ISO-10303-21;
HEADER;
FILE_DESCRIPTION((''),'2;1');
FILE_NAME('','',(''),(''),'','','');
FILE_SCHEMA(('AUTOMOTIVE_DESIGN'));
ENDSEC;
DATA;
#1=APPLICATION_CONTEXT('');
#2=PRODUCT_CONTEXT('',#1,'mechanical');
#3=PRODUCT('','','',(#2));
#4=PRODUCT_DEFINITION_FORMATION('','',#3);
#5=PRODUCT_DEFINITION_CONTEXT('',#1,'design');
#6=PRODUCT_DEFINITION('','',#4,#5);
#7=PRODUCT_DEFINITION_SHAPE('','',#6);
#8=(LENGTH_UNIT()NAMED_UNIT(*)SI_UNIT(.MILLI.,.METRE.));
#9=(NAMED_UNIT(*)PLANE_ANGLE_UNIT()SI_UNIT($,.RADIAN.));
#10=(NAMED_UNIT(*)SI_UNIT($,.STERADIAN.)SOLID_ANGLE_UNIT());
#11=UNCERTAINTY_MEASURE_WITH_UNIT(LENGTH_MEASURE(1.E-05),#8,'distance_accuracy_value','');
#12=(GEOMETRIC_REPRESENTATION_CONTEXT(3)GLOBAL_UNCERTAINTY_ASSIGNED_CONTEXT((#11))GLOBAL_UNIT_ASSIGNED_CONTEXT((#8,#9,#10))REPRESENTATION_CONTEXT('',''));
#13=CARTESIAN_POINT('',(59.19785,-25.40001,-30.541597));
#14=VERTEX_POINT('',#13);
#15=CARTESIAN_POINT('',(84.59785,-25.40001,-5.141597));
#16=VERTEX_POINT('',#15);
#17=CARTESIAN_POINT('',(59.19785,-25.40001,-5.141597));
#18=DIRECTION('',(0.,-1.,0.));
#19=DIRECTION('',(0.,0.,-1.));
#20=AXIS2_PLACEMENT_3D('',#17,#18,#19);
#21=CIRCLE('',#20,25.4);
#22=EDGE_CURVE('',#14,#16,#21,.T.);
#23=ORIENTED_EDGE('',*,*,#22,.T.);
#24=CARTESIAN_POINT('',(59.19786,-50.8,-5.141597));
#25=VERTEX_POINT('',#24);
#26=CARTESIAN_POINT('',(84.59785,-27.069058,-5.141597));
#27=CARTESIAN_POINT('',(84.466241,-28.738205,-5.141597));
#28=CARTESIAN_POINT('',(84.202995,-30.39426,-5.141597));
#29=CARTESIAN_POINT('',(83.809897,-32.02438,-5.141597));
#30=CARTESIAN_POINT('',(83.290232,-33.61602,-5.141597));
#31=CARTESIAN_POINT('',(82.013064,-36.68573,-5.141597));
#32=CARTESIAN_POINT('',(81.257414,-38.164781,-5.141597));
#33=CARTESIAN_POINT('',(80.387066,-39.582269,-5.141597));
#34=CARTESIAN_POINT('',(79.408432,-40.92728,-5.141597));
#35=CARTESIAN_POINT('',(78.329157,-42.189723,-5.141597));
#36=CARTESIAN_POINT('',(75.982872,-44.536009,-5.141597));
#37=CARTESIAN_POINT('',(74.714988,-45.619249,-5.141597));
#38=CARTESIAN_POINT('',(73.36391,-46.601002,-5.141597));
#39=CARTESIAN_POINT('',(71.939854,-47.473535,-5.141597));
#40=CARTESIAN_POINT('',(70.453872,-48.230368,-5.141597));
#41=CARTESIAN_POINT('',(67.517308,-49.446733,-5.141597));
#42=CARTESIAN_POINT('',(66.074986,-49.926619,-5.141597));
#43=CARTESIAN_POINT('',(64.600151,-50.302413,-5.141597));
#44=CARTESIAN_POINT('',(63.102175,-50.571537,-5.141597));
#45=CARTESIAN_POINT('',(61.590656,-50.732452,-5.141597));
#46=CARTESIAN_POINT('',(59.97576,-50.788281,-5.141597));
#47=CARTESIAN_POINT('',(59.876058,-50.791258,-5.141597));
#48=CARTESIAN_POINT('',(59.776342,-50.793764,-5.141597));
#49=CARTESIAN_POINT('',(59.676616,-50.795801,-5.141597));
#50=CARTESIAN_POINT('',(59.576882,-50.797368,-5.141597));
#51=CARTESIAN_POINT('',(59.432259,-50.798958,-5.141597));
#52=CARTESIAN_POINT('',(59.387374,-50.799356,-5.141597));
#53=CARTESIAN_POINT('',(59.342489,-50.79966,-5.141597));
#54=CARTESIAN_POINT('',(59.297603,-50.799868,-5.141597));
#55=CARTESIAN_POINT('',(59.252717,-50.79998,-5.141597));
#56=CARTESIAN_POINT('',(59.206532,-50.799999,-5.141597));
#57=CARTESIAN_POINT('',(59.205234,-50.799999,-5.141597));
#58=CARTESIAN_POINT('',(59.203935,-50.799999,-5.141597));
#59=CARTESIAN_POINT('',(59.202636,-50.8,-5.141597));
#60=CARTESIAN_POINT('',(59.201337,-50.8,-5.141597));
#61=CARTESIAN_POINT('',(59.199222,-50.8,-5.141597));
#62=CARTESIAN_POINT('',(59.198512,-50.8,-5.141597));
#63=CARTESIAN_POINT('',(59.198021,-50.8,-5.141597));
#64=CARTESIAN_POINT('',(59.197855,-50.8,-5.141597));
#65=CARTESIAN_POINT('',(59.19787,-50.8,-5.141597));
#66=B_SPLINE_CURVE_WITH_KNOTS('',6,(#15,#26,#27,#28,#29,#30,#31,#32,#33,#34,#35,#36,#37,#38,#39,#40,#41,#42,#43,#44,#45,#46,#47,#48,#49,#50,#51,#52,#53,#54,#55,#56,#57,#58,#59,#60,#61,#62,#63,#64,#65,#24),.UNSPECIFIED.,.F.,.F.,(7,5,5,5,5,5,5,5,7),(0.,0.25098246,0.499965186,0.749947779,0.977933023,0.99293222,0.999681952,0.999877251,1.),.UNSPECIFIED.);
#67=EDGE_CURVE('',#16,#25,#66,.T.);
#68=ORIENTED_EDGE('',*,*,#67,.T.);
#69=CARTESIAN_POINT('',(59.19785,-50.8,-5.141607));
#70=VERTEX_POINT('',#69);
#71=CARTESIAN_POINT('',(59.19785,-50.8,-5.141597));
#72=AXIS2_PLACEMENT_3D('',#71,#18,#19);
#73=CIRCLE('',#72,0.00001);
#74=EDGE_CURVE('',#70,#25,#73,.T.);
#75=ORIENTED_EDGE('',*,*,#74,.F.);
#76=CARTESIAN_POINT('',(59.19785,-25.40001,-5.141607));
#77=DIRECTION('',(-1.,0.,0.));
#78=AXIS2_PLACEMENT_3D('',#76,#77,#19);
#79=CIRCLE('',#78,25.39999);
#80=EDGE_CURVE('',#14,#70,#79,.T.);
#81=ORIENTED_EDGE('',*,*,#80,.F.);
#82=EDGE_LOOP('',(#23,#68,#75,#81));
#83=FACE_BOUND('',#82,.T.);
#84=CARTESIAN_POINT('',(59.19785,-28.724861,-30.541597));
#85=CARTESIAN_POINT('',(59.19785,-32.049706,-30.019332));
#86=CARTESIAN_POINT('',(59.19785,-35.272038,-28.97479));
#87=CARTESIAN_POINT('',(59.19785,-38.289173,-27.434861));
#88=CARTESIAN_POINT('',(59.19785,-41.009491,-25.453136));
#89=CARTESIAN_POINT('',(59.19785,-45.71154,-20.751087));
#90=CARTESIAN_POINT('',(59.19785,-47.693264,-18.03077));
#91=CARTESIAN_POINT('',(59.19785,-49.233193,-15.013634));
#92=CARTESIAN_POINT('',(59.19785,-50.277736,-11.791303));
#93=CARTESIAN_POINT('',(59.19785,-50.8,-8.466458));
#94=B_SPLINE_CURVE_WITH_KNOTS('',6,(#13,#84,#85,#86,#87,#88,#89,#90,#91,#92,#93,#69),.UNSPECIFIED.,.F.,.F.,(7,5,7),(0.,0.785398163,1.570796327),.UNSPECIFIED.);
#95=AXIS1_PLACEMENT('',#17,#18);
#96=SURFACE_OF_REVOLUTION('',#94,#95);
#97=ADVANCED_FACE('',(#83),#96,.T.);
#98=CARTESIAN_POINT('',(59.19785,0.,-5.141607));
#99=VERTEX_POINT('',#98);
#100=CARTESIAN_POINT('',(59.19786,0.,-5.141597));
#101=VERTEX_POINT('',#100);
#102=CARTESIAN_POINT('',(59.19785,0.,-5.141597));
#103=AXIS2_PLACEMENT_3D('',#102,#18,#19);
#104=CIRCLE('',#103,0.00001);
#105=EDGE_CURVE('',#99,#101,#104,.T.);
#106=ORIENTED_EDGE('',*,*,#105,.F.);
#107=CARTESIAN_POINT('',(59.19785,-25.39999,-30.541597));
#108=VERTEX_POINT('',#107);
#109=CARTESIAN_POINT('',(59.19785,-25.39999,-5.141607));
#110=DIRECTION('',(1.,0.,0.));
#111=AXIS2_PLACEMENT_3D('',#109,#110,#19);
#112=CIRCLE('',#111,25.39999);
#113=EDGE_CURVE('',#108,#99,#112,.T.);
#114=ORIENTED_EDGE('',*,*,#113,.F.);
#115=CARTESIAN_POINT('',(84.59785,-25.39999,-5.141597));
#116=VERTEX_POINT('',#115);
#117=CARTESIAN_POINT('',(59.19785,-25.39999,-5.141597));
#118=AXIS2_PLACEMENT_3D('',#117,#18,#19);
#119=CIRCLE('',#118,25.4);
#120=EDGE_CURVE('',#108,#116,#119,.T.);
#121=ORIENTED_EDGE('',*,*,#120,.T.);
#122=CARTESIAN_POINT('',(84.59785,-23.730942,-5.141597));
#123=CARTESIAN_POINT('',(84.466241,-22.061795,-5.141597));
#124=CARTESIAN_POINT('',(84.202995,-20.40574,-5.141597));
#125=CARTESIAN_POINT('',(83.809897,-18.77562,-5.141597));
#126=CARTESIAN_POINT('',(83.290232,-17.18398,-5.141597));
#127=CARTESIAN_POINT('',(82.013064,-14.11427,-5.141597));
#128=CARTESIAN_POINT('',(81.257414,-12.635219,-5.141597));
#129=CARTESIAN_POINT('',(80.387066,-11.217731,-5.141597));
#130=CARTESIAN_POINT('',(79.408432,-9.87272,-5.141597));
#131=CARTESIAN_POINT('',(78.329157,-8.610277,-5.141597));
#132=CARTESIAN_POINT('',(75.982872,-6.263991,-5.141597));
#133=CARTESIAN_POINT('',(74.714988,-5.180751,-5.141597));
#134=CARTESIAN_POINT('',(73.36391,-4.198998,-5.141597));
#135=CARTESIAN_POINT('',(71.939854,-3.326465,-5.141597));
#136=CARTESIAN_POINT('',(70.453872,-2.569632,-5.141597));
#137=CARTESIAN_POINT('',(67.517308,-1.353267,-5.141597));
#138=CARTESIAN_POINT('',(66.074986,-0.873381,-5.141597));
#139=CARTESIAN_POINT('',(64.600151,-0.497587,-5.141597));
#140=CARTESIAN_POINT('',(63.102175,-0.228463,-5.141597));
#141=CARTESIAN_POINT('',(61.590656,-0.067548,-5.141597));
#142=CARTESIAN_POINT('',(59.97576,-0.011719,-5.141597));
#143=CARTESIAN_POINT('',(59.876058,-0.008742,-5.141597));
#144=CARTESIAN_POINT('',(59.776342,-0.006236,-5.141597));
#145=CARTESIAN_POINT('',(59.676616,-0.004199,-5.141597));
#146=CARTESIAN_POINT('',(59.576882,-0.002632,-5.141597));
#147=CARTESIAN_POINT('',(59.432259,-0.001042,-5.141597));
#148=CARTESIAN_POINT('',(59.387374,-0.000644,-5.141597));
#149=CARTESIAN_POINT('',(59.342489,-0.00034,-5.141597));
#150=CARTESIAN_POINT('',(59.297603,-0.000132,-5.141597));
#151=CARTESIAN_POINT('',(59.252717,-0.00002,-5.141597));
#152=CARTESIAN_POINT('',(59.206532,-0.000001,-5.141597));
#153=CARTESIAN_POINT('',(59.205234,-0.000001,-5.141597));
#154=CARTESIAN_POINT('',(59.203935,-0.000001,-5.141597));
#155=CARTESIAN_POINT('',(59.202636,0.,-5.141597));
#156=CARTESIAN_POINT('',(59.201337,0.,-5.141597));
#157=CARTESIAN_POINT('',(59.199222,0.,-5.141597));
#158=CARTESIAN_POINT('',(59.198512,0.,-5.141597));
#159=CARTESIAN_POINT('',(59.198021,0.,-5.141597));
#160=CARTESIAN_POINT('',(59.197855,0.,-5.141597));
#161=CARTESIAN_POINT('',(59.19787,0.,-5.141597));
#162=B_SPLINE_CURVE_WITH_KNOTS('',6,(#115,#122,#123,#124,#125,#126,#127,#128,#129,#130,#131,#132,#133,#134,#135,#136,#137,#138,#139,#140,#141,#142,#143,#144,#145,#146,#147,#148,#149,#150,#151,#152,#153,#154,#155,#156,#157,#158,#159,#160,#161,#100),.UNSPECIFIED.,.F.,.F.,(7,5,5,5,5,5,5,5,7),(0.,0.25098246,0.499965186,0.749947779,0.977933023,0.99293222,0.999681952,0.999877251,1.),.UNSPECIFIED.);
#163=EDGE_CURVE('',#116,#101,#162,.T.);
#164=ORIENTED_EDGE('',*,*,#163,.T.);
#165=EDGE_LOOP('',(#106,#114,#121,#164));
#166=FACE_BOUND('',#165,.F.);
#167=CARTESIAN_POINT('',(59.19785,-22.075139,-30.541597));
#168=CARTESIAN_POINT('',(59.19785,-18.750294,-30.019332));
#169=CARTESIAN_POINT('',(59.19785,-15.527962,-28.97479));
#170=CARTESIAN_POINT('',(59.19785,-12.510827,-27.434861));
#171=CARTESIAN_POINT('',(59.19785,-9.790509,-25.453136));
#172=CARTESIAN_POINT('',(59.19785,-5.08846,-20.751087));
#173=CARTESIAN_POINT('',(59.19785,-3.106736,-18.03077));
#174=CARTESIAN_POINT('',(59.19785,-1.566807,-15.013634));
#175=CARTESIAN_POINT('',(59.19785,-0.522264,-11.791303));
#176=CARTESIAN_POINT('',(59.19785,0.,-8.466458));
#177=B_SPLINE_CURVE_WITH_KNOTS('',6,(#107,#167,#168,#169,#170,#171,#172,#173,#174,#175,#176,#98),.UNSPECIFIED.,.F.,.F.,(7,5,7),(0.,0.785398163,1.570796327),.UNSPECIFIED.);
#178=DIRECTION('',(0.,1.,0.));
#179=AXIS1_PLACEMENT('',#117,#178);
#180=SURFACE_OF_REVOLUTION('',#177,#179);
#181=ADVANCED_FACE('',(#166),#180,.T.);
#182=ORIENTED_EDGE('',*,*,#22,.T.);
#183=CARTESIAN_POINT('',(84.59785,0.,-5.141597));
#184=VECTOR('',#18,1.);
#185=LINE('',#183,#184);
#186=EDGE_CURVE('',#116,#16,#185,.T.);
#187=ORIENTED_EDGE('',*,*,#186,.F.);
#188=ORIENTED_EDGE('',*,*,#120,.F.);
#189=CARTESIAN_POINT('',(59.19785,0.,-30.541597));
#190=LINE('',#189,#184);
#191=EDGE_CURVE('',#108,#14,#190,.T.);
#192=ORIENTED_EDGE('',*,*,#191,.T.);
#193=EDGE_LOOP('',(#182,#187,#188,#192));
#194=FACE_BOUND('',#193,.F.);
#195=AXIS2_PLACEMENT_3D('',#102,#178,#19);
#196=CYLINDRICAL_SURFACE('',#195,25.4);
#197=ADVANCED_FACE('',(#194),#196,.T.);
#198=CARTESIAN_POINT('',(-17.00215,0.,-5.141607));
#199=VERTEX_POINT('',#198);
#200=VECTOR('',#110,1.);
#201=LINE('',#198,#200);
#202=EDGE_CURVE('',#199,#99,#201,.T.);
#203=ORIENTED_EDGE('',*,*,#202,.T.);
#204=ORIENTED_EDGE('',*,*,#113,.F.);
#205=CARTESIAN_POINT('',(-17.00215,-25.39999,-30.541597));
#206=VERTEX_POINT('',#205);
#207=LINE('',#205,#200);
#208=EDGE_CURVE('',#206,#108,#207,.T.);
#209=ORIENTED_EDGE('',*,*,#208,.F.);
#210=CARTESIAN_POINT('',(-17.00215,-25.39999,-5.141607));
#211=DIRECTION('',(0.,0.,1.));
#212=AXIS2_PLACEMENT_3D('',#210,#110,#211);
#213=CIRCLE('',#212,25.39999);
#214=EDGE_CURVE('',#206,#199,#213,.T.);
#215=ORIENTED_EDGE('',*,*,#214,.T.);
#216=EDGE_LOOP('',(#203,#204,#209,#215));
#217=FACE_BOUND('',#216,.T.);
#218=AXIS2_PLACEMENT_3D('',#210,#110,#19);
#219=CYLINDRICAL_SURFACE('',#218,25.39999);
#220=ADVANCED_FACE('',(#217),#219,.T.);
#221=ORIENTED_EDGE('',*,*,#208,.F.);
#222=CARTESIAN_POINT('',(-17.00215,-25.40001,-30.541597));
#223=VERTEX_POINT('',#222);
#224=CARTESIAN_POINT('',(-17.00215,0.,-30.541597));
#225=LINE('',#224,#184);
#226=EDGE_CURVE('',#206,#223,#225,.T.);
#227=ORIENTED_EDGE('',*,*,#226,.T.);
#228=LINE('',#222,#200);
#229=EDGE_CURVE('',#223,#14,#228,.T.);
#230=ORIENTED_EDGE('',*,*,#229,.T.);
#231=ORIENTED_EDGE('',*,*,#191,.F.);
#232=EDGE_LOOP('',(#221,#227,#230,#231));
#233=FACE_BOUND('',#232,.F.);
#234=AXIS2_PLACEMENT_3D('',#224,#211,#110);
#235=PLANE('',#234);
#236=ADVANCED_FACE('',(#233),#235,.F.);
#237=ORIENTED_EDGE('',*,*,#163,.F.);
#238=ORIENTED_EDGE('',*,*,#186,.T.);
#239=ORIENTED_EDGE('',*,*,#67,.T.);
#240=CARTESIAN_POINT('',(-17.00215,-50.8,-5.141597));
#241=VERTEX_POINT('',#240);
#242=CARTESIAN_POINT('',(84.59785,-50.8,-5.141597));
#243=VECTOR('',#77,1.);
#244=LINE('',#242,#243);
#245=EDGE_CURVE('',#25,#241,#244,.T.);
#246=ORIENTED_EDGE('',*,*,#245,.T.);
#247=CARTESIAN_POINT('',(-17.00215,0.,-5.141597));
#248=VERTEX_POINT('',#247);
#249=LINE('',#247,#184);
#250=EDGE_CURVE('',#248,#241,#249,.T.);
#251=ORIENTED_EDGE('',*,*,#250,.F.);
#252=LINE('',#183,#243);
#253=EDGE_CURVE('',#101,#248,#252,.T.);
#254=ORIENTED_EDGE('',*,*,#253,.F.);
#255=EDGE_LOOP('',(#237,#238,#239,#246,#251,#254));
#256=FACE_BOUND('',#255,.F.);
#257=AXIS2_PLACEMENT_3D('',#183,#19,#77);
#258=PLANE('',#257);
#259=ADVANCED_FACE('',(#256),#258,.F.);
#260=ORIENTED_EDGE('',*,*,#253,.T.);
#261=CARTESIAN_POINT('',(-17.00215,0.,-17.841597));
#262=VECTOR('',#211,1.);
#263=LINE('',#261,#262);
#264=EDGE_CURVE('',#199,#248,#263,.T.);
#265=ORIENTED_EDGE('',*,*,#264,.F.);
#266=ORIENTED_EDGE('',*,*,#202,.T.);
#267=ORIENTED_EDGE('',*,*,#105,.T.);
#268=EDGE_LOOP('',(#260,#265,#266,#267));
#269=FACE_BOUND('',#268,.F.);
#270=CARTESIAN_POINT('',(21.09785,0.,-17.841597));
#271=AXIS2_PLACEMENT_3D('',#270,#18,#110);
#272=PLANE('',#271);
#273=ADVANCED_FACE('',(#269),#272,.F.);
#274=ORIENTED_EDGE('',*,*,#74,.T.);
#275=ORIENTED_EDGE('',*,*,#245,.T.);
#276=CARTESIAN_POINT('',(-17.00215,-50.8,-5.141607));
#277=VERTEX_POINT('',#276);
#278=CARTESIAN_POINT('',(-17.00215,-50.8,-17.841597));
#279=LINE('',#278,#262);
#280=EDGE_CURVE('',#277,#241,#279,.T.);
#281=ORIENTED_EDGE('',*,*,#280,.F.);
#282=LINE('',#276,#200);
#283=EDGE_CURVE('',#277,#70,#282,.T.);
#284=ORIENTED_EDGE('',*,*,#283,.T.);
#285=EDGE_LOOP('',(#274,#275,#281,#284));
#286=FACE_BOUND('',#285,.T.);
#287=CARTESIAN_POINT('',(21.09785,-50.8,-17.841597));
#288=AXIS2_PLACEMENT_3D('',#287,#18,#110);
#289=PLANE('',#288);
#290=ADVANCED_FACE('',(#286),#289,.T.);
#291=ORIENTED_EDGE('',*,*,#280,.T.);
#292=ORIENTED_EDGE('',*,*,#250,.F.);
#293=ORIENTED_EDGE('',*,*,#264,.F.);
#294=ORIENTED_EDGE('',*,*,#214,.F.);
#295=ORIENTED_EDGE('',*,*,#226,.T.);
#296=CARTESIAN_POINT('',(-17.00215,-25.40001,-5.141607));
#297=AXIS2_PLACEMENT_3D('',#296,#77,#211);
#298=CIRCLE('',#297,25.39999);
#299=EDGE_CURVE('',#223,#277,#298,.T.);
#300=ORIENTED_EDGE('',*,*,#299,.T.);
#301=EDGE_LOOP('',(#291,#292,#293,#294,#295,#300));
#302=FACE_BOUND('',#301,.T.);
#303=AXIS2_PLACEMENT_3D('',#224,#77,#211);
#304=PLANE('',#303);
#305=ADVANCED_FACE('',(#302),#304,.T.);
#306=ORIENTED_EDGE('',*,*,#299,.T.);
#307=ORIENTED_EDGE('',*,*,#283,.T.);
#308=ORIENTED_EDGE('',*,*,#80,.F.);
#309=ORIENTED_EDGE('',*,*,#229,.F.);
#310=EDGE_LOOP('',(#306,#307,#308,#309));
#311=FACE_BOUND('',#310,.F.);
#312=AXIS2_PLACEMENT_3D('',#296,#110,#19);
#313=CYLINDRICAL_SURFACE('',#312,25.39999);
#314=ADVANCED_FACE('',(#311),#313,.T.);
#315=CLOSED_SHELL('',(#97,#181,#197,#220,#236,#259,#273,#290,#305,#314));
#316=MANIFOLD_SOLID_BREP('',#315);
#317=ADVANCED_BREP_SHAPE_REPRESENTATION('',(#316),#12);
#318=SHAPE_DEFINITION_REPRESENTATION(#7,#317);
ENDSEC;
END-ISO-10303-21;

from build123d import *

# Parameters (mm, degrees)
F0_W     = 76.2
F0_H     = 25.4
F1_DEPTH = 50.8
F2_R     = 25.39999
F3_R     = 25.39999


# Not quite as in the source:
# - a fillet or chamfer is up to 0.001 mm smaller than in the source, because OpenCascade refuses the exact size


with BuildPart() as f1:
    # F0 (on Front) → F1 (new body)
    with BuildSketch(Plane.XZ):
        with Locations((21.0978503615, -17.8415966735)):
            Rectangle(F0_W, F0_H)
        with BuildLine():
            Line((84.5978503615, -5.1415966735), (59.1978503615, -5.1415966735))
            Line((59.1978503615, -5.1415966735), (59.1978503615, -30.5415966735))
            ThreePointArc((59.1978503615, -30.5415966735), (77.1583626036, -23.1021089156), (84.5978503615, -5.1415966735))
        make_face()
    extrude(amount=F1_DEPTH)

    # F2 (radius 25.4 in the source; OpenCascade refuses exactly that, so slightly less here)
    f2_edges = [f1.edges().sort_by_distance(p)[0] for p in [
        (21.09785, -50.8, -30.541597),
    ]]
    fillet(f2_edges, radius=F2_R)

    # F3 (radius 25.4 in the source; OpenCascade refuses exactly that, so slightly less here)
    f3_edges = [f1.edges().sort_by_distance(p)[0] for p in [
        (21.09785, 0, -30.541597),
    ]]
    fillet(f3_edges, radius=F3_R)


solid = f1.part
